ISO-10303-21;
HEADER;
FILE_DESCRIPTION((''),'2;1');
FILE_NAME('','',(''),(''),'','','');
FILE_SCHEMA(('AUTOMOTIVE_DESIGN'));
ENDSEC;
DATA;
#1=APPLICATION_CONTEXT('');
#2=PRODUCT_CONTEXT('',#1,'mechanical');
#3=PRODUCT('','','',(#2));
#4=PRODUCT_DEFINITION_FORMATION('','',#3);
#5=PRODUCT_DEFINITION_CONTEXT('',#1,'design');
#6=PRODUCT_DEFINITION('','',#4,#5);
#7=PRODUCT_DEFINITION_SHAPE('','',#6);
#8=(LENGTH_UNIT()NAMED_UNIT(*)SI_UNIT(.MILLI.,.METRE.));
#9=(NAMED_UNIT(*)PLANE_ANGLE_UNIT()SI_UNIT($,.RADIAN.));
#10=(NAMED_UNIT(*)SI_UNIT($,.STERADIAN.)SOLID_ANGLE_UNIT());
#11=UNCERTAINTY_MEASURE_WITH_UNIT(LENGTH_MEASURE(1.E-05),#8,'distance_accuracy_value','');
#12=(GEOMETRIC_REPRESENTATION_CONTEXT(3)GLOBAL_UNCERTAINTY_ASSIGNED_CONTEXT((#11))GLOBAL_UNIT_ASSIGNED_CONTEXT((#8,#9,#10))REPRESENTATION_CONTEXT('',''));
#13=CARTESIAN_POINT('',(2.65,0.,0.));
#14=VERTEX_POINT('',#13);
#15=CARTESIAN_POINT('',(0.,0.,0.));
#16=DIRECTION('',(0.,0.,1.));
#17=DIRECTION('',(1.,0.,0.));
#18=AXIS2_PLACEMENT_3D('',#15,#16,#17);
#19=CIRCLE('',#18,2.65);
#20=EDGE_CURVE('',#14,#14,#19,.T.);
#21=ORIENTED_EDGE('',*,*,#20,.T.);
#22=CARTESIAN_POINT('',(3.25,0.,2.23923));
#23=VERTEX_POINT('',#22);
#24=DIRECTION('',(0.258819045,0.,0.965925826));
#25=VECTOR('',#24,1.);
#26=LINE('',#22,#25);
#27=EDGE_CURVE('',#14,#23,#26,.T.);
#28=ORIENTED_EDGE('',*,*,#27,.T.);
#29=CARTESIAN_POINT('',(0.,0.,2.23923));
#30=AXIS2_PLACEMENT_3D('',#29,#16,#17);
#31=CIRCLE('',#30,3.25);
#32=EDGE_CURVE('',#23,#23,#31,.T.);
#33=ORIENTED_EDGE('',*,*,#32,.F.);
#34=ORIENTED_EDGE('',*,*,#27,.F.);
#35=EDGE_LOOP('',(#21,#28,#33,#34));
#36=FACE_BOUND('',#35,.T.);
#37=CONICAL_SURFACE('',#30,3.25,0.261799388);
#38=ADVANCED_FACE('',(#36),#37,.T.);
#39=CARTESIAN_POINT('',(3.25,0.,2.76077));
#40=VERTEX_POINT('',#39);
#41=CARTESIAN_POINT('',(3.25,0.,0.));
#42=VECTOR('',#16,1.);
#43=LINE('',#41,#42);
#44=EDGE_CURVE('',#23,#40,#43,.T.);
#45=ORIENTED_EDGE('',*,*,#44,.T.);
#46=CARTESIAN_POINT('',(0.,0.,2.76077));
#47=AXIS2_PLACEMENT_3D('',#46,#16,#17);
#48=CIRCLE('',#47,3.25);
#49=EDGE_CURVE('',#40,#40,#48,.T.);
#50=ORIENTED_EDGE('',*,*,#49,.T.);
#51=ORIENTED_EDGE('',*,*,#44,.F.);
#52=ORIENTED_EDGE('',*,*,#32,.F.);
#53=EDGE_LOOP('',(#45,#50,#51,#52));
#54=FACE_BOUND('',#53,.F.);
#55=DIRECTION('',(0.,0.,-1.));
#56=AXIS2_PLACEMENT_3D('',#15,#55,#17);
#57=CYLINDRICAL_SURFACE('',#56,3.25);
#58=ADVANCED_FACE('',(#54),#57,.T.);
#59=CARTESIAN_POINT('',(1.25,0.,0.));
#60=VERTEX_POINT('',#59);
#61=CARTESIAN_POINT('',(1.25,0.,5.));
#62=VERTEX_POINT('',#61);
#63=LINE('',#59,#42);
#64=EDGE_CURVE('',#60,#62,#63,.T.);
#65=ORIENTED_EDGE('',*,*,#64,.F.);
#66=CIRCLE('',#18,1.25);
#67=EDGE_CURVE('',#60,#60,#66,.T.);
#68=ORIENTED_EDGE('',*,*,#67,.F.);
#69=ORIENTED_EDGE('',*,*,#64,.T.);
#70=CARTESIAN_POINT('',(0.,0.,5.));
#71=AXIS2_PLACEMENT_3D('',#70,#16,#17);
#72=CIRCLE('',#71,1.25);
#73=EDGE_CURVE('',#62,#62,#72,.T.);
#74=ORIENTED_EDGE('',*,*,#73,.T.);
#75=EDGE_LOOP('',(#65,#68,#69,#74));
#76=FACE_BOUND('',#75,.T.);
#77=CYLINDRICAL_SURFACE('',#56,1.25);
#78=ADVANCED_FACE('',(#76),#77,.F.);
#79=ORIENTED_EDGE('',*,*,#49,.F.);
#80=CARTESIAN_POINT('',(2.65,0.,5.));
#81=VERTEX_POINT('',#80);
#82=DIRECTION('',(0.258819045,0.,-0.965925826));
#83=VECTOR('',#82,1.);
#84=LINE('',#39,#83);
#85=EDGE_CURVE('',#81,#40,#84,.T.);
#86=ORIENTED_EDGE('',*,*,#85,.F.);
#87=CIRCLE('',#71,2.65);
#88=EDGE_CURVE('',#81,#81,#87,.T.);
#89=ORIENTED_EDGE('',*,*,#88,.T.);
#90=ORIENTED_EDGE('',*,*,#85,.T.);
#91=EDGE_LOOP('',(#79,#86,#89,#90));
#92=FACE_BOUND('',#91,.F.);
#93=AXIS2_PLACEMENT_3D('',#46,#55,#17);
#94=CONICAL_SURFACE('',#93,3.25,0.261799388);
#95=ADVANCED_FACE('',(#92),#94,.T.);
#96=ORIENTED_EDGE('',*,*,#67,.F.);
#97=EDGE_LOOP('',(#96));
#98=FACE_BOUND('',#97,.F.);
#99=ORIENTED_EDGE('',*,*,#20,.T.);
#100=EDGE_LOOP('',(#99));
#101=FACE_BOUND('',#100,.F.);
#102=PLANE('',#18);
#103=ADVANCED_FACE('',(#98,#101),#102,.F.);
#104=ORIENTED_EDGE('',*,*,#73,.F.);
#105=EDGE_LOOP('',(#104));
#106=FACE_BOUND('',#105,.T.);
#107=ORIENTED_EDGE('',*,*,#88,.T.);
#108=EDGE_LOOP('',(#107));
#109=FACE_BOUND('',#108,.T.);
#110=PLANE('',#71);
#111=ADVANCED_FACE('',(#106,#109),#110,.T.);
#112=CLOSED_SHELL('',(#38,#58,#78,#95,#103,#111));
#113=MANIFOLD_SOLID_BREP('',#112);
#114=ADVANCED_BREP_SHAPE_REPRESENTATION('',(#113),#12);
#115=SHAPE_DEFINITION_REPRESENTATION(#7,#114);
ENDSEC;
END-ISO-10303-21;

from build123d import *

# Parameters (mm, degrees)
F0_R       = 3.25
F0_R_2     = 2.9
F0_R_3     = 1.25
F1_DEPTH   = 5
F2_SIZE2   = 2.2392304845
F2_SIZE    = 0.6
F2_2_SIZE2 = 2.2392304845
F2_2_SIZE  = 0.6


with BuildPart() as f1:
    # F0 (on Top) → F1 (new body)
    with BuildSketch(Plane.XY):
        Circle(F0_R)
        Circle(F0_R_2, mode=Mode.SUBTRACT)
        Circle(F0_R_2)
        Circle(F0_R_3, mode=Mode.SUBTRACT)
    extrude(amount=F1_DEPTH)

    # F2
    f2_edges = [f1.edges().sort_by_distance(p)[0] for p in [
        (-3.25, 0, 5),
    ]]
    f2_side = f1.faces().sort_by_distance((-1.341924, 0, 5))[0]
    chamfer(f2_edges, length=F2_SIZE, length2=F2_SIZE2, reference=f2_side)

    # F2#2
    f2_2_edges = [f1.edges().sort_by_distance(p)[0] for p in [
        (-3.25, 0, 0),
    ]]
    f2_2_side = f1.faces().sort_by_distance((-1.341924, 0, 0))[0]
    chamfer(f2_2_edges, length=F2_2_SIZE, length2=F2_2_SIZE2, reference=f2_2_side)


solid = f1.part
